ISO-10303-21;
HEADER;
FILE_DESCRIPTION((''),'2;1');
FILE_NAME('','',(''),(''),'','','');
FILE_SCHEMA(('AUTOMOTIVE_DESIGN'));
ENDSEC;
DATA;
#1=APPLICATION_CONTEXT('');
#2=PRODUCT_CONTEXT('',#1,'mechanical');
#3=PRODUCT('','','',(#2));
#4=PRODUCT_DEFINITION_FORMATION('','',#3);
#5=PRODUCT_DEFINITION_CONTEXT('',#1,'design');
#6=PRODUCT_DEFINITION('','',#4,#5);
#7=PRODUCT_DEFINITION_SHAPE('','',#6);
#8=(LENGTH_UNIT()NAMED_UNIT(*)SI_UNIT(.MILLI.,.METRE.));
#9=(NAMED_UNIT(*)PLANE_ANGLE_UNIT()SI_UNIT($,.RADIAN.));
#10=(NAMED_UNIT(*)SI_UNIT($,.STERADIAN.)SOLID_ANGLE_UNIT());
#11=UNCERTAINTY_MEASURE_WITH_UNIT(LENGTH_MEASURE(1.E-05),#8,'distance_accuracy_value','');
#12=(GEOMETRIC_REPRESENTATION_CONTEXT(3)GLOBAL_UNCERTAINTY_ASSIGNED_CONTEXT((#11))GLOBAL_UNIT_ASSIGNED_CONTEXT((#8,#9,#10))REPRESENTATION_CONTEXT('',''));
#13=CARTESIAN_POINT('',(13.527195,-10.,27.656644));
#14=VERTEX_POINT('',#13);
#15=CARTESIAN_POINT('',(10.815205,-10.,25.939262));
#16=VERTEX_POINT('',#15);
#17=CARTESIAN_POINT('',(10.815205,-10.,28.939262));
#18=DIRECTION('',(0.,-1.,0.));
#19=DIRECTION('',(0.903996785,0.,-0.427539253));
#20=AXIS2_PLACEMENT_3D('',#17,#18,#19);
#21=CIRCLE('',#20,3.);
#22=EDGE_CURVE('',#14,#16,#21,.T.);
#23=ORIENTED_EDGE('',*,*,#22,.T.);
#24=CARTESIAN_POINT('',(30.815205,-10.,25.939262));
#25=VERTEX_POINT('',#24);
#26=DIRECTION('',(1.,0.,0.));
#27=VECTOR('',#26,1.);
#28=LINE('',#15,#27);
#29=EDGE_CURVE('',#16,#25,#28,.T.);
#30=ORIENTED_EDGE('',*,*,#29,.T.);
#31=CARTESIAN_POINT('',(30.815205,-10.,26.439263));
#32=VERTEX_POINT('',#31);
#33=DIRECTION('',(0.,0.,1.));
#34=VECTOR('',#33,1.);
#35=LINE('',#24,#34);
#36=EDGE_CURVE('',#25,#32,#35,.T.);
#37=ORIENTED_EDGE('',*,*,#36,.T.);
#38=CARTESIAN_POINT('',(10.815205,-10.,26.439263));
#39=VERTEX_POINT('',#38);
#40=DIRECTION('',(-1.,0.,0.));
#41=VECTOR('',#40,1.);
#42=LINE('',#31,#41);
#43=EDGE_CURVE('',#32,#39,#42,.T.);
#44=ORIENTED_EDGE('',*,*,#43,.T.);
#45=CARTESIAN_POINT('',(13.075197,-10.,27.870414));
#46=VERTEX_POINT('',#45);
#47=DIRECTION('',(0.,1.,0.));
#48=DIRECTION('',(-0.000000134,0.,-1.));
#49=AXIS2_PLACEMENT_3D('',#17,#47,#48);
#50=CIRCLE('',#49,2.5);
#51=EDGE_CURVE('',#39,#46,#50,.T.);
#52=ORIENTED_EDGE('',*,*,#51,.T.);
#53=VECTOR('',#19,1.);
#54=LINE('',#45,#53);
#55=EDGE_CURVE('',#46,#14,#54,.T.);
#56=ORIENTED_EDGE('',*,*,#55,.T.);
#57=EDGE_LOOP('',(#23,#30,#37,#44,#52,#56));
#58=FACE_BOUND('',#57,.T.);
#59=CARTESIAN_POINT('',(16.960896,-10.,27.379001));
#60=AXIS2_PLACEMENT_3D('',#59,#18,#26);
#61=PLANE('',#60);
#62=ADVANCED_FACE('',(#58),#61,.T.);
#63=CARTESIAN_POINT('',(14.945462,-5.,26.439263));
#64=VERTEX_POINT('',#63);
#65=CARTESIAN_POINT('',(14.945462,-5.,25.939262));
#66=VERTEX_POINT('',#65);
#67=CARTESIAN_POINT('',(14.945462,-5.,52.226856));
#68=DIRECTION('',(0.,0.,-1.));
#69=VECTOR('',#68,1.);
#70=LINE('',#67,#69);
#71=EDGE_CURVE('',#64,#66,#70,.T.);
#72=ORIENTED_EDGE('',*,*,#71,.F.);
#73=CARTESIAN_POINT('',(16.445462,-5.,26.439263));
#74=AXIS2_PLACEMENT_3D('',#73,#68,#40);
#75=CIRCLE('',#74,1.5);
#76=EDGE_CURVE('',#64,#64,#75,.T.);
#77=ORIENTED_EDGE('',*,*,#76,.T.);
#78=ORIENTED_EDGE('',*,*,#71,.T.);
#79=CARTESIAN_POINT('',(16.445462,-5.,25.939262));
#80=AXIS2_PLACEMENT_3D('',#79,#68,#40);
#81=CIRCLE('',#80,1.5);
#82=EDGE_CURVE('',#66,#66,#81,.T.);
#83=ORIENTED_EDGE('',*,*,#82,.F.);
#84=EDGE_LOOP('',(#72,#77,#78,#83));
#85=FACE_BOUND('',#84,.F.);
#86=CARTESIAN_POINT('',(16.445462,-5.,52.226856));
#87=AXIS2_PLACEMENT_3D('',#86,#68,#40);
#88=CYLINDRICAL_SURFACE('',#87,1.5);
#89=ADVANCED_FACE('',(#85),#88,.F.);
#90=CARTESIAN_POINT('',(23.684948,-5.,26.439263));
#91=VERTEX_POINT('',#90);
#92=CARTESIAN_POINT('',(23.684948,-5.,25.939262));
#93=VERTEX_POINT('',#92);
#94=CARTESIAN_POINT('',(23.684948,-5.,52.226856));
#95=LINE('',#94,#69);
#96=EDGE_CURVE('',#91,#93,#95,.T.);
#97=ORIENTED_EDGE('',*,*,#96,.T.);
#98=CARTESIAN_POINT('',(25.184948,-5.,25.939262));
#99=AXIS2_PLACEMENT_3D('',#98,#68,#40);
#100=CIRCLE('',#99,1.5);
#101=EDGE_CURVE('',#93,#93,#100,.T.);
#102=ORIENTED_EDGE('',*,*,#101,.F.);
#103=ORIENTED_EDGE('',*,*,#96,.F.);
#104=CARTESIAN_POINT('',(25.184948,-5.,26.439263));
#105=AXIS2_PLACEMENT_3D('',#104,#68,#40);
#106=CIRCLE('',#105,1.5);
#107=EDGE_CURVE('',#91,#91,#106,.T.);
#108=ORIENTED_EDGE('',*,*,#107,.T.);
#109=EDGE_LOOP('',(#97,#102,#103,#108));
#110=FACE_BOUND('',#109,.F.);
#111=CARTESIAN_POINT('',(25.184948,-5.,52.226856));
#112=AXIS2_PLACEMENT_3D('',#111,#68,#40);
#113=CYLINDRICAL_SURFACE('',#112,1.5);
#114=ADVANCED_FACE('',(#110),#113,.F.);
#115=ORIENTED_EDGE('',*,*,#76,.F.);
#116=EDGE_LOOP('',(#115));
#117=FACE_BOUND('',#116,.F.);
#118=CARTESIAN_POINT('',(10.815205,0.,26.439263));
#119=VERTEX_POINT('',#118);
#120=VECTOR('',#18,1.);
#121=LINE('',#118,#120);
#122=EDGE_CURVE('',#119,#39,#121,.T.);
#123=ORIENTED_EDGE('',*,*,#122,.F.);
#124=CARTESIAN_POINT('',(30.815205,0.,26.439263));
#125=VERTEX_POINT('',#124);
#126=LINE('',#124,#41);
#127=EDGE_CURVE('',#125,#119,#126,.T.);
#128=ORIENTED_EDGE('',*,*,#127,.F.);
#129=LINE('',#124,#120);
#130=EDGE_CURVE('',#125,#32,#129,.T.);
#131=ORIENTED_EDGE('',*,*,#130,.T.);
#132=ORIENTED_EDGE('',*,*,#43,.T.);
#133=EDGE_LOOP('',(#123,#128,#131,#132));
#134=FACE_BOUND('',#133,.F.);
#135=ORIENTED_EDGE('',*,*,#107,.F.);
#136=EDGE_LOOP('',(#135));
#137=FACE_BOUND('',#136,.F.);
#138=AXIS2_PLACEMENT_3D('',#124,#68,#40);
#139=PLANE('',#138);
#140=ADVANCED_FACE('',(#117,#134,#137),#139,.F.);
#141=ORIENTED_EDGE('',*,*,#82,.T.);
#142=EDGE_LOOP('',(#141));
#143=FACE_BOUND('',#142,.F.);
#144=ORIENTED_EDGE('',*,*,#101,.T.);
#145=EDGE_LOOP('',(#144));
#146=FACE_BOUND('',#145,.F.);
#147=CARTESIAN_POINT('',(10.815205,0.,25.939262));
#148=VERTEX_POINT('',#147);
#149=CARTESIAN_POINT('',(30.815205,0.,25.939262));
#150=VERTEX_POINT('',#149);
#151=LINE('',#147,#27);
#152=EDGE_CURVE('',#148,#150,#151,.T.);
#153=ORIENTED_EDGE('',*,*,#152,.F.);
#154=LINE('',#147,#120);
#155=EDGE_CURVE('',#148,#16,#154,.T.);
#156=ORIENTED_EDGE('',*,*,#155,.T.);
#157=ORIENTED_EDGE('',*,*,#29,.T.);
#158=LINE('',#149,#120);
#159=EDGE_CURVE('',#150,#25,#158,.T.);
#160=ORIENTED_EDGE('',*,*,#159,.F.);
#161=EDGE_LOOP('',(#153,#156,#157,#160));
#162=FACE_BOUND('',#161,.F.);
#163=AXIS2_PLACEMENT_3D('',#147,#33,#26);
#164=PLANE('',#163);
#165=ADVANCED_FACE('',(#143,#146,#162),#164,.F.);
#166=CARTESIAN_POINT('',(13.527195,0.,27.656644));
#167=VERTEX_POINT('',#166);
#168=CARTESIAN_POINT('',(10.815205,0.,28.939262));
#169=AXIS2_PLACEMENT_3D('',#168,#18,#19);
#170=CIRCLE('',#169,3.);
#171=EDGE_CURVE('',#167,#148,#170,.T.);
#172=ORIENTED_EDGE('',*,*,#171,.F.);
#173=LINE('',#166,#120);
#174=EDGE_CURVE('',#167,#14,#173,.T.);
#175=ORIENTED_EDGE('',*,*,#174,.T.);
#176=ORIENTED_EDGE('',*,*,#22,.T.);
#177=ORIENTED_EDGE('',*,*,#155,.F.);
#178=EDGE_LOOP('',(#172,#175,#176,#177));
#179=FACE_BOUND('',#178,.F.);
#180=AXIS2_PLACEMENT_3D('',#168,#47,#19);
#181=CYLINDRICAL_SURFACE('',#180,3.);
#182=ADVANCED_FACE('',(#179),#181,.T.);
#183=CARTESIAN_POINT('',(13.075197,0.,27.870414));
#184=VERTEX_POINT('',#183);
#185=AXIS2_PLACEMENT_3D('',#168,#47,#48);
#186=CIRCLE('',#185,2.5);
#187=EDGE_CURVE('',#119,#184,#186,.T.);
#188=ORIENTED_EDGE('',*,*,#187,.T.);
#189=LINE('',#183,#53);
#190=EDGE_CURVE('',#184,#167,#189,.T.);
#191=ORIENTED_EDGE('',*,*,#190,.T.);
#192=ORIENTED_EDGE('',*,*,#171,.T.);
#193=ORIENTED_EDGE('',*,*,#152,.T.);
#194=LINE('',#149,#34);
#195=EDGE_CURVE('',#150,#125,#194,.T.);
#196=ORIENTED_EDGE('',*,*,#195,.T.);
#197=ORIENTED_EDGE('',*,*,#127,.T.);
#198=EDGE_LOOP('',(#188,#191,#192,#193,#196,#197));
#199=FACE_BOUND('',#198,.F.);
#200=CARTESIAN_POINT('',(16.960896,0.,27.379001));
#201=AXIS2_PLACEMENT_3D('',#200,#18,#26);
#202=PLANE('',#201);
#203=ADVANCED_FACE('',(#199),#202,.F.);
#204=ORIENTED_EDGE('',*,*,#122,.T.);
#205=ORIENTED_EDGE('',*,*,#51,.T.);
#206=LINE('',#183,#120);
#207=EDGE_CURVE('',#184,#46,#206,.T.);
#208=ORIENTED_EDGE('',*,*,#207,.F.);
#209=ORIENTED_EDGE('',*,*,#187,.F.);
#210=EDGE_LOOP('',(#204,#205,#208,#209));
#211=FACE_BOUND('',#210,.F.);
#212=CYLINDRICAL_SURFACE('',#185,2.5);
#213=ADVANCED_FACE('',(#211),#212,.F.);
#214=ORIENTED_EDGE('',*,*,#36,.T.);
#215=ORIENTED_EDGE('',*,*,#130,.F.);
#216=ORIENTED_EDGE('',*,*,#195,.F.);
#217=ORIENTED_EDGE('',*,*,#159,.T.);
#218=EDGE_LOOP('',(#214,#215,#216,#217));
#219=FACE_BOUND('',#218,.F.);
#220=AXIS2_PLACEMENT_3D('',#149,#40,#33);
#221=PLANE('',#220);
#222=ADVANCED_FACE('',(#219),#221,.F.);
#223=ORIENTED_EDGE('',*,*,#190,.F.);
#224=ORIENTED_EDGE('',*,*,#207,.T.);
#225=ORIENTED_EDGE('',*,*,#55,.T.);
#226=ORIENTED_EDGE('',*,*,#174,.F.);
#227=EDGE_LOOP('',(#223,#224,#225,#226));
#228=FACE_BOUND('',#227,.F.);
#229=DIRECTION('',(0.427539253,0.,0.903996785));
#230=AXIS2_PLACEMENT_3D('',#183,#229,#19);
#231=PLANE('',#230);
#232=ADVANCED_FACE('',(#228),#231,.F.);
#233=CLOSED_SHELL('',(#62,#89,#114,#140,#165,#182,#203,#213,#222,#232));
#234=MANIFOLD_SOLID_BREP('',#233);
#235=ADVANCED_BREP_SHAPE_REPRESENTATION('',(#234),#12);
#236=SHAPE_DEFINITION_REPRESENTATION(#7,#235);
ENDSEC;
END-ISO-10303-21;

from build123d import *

# Parameters (mm, degrees)
F1_DEPTH = 10
F3_D     = 3


# Not quite as in the source:
# - ends of sketch curves that miss each other by under 0.0002 mm in the source are joined


with BuildPart() as f1:
    # F0 (on Front) → F1 (new body)
    with BuildSketch(Plane.XZ):
        with BuildLine():
            ThreePointArc((13.5271953943, 27.6566442743), (9.210189973, 31.473808666), (10.8152050392, 25.9392620325))
            Line((10.8152050392, 25.9392620325), (30.8152050392, 25.9392620325))
            Line((30.8152050392, 25.9392620325), (30.8152050392, 26.439262554))
            Line((30.8152050392, 26.439262554), (10.8152050392, 26.439262554))
            ThreePointArc((10.8152050392, 26.439262554), (9.4776924841, 31.0513842271), (13.0751970018, 27.8704139006))
            Line((13.0751970018, 27.8704139006), (13.5271953943, 27.6566442743))
        make_face()
    extrude(amount=F1_DEPTH)

    # F3 (through all)
    with Locations(Plane.XY.offset(26.439262554)):
        with Locations((16.4454622901, -5), (25.1849477884, -5)):
            Hole(F3_D / 2)


solid = f1.part
